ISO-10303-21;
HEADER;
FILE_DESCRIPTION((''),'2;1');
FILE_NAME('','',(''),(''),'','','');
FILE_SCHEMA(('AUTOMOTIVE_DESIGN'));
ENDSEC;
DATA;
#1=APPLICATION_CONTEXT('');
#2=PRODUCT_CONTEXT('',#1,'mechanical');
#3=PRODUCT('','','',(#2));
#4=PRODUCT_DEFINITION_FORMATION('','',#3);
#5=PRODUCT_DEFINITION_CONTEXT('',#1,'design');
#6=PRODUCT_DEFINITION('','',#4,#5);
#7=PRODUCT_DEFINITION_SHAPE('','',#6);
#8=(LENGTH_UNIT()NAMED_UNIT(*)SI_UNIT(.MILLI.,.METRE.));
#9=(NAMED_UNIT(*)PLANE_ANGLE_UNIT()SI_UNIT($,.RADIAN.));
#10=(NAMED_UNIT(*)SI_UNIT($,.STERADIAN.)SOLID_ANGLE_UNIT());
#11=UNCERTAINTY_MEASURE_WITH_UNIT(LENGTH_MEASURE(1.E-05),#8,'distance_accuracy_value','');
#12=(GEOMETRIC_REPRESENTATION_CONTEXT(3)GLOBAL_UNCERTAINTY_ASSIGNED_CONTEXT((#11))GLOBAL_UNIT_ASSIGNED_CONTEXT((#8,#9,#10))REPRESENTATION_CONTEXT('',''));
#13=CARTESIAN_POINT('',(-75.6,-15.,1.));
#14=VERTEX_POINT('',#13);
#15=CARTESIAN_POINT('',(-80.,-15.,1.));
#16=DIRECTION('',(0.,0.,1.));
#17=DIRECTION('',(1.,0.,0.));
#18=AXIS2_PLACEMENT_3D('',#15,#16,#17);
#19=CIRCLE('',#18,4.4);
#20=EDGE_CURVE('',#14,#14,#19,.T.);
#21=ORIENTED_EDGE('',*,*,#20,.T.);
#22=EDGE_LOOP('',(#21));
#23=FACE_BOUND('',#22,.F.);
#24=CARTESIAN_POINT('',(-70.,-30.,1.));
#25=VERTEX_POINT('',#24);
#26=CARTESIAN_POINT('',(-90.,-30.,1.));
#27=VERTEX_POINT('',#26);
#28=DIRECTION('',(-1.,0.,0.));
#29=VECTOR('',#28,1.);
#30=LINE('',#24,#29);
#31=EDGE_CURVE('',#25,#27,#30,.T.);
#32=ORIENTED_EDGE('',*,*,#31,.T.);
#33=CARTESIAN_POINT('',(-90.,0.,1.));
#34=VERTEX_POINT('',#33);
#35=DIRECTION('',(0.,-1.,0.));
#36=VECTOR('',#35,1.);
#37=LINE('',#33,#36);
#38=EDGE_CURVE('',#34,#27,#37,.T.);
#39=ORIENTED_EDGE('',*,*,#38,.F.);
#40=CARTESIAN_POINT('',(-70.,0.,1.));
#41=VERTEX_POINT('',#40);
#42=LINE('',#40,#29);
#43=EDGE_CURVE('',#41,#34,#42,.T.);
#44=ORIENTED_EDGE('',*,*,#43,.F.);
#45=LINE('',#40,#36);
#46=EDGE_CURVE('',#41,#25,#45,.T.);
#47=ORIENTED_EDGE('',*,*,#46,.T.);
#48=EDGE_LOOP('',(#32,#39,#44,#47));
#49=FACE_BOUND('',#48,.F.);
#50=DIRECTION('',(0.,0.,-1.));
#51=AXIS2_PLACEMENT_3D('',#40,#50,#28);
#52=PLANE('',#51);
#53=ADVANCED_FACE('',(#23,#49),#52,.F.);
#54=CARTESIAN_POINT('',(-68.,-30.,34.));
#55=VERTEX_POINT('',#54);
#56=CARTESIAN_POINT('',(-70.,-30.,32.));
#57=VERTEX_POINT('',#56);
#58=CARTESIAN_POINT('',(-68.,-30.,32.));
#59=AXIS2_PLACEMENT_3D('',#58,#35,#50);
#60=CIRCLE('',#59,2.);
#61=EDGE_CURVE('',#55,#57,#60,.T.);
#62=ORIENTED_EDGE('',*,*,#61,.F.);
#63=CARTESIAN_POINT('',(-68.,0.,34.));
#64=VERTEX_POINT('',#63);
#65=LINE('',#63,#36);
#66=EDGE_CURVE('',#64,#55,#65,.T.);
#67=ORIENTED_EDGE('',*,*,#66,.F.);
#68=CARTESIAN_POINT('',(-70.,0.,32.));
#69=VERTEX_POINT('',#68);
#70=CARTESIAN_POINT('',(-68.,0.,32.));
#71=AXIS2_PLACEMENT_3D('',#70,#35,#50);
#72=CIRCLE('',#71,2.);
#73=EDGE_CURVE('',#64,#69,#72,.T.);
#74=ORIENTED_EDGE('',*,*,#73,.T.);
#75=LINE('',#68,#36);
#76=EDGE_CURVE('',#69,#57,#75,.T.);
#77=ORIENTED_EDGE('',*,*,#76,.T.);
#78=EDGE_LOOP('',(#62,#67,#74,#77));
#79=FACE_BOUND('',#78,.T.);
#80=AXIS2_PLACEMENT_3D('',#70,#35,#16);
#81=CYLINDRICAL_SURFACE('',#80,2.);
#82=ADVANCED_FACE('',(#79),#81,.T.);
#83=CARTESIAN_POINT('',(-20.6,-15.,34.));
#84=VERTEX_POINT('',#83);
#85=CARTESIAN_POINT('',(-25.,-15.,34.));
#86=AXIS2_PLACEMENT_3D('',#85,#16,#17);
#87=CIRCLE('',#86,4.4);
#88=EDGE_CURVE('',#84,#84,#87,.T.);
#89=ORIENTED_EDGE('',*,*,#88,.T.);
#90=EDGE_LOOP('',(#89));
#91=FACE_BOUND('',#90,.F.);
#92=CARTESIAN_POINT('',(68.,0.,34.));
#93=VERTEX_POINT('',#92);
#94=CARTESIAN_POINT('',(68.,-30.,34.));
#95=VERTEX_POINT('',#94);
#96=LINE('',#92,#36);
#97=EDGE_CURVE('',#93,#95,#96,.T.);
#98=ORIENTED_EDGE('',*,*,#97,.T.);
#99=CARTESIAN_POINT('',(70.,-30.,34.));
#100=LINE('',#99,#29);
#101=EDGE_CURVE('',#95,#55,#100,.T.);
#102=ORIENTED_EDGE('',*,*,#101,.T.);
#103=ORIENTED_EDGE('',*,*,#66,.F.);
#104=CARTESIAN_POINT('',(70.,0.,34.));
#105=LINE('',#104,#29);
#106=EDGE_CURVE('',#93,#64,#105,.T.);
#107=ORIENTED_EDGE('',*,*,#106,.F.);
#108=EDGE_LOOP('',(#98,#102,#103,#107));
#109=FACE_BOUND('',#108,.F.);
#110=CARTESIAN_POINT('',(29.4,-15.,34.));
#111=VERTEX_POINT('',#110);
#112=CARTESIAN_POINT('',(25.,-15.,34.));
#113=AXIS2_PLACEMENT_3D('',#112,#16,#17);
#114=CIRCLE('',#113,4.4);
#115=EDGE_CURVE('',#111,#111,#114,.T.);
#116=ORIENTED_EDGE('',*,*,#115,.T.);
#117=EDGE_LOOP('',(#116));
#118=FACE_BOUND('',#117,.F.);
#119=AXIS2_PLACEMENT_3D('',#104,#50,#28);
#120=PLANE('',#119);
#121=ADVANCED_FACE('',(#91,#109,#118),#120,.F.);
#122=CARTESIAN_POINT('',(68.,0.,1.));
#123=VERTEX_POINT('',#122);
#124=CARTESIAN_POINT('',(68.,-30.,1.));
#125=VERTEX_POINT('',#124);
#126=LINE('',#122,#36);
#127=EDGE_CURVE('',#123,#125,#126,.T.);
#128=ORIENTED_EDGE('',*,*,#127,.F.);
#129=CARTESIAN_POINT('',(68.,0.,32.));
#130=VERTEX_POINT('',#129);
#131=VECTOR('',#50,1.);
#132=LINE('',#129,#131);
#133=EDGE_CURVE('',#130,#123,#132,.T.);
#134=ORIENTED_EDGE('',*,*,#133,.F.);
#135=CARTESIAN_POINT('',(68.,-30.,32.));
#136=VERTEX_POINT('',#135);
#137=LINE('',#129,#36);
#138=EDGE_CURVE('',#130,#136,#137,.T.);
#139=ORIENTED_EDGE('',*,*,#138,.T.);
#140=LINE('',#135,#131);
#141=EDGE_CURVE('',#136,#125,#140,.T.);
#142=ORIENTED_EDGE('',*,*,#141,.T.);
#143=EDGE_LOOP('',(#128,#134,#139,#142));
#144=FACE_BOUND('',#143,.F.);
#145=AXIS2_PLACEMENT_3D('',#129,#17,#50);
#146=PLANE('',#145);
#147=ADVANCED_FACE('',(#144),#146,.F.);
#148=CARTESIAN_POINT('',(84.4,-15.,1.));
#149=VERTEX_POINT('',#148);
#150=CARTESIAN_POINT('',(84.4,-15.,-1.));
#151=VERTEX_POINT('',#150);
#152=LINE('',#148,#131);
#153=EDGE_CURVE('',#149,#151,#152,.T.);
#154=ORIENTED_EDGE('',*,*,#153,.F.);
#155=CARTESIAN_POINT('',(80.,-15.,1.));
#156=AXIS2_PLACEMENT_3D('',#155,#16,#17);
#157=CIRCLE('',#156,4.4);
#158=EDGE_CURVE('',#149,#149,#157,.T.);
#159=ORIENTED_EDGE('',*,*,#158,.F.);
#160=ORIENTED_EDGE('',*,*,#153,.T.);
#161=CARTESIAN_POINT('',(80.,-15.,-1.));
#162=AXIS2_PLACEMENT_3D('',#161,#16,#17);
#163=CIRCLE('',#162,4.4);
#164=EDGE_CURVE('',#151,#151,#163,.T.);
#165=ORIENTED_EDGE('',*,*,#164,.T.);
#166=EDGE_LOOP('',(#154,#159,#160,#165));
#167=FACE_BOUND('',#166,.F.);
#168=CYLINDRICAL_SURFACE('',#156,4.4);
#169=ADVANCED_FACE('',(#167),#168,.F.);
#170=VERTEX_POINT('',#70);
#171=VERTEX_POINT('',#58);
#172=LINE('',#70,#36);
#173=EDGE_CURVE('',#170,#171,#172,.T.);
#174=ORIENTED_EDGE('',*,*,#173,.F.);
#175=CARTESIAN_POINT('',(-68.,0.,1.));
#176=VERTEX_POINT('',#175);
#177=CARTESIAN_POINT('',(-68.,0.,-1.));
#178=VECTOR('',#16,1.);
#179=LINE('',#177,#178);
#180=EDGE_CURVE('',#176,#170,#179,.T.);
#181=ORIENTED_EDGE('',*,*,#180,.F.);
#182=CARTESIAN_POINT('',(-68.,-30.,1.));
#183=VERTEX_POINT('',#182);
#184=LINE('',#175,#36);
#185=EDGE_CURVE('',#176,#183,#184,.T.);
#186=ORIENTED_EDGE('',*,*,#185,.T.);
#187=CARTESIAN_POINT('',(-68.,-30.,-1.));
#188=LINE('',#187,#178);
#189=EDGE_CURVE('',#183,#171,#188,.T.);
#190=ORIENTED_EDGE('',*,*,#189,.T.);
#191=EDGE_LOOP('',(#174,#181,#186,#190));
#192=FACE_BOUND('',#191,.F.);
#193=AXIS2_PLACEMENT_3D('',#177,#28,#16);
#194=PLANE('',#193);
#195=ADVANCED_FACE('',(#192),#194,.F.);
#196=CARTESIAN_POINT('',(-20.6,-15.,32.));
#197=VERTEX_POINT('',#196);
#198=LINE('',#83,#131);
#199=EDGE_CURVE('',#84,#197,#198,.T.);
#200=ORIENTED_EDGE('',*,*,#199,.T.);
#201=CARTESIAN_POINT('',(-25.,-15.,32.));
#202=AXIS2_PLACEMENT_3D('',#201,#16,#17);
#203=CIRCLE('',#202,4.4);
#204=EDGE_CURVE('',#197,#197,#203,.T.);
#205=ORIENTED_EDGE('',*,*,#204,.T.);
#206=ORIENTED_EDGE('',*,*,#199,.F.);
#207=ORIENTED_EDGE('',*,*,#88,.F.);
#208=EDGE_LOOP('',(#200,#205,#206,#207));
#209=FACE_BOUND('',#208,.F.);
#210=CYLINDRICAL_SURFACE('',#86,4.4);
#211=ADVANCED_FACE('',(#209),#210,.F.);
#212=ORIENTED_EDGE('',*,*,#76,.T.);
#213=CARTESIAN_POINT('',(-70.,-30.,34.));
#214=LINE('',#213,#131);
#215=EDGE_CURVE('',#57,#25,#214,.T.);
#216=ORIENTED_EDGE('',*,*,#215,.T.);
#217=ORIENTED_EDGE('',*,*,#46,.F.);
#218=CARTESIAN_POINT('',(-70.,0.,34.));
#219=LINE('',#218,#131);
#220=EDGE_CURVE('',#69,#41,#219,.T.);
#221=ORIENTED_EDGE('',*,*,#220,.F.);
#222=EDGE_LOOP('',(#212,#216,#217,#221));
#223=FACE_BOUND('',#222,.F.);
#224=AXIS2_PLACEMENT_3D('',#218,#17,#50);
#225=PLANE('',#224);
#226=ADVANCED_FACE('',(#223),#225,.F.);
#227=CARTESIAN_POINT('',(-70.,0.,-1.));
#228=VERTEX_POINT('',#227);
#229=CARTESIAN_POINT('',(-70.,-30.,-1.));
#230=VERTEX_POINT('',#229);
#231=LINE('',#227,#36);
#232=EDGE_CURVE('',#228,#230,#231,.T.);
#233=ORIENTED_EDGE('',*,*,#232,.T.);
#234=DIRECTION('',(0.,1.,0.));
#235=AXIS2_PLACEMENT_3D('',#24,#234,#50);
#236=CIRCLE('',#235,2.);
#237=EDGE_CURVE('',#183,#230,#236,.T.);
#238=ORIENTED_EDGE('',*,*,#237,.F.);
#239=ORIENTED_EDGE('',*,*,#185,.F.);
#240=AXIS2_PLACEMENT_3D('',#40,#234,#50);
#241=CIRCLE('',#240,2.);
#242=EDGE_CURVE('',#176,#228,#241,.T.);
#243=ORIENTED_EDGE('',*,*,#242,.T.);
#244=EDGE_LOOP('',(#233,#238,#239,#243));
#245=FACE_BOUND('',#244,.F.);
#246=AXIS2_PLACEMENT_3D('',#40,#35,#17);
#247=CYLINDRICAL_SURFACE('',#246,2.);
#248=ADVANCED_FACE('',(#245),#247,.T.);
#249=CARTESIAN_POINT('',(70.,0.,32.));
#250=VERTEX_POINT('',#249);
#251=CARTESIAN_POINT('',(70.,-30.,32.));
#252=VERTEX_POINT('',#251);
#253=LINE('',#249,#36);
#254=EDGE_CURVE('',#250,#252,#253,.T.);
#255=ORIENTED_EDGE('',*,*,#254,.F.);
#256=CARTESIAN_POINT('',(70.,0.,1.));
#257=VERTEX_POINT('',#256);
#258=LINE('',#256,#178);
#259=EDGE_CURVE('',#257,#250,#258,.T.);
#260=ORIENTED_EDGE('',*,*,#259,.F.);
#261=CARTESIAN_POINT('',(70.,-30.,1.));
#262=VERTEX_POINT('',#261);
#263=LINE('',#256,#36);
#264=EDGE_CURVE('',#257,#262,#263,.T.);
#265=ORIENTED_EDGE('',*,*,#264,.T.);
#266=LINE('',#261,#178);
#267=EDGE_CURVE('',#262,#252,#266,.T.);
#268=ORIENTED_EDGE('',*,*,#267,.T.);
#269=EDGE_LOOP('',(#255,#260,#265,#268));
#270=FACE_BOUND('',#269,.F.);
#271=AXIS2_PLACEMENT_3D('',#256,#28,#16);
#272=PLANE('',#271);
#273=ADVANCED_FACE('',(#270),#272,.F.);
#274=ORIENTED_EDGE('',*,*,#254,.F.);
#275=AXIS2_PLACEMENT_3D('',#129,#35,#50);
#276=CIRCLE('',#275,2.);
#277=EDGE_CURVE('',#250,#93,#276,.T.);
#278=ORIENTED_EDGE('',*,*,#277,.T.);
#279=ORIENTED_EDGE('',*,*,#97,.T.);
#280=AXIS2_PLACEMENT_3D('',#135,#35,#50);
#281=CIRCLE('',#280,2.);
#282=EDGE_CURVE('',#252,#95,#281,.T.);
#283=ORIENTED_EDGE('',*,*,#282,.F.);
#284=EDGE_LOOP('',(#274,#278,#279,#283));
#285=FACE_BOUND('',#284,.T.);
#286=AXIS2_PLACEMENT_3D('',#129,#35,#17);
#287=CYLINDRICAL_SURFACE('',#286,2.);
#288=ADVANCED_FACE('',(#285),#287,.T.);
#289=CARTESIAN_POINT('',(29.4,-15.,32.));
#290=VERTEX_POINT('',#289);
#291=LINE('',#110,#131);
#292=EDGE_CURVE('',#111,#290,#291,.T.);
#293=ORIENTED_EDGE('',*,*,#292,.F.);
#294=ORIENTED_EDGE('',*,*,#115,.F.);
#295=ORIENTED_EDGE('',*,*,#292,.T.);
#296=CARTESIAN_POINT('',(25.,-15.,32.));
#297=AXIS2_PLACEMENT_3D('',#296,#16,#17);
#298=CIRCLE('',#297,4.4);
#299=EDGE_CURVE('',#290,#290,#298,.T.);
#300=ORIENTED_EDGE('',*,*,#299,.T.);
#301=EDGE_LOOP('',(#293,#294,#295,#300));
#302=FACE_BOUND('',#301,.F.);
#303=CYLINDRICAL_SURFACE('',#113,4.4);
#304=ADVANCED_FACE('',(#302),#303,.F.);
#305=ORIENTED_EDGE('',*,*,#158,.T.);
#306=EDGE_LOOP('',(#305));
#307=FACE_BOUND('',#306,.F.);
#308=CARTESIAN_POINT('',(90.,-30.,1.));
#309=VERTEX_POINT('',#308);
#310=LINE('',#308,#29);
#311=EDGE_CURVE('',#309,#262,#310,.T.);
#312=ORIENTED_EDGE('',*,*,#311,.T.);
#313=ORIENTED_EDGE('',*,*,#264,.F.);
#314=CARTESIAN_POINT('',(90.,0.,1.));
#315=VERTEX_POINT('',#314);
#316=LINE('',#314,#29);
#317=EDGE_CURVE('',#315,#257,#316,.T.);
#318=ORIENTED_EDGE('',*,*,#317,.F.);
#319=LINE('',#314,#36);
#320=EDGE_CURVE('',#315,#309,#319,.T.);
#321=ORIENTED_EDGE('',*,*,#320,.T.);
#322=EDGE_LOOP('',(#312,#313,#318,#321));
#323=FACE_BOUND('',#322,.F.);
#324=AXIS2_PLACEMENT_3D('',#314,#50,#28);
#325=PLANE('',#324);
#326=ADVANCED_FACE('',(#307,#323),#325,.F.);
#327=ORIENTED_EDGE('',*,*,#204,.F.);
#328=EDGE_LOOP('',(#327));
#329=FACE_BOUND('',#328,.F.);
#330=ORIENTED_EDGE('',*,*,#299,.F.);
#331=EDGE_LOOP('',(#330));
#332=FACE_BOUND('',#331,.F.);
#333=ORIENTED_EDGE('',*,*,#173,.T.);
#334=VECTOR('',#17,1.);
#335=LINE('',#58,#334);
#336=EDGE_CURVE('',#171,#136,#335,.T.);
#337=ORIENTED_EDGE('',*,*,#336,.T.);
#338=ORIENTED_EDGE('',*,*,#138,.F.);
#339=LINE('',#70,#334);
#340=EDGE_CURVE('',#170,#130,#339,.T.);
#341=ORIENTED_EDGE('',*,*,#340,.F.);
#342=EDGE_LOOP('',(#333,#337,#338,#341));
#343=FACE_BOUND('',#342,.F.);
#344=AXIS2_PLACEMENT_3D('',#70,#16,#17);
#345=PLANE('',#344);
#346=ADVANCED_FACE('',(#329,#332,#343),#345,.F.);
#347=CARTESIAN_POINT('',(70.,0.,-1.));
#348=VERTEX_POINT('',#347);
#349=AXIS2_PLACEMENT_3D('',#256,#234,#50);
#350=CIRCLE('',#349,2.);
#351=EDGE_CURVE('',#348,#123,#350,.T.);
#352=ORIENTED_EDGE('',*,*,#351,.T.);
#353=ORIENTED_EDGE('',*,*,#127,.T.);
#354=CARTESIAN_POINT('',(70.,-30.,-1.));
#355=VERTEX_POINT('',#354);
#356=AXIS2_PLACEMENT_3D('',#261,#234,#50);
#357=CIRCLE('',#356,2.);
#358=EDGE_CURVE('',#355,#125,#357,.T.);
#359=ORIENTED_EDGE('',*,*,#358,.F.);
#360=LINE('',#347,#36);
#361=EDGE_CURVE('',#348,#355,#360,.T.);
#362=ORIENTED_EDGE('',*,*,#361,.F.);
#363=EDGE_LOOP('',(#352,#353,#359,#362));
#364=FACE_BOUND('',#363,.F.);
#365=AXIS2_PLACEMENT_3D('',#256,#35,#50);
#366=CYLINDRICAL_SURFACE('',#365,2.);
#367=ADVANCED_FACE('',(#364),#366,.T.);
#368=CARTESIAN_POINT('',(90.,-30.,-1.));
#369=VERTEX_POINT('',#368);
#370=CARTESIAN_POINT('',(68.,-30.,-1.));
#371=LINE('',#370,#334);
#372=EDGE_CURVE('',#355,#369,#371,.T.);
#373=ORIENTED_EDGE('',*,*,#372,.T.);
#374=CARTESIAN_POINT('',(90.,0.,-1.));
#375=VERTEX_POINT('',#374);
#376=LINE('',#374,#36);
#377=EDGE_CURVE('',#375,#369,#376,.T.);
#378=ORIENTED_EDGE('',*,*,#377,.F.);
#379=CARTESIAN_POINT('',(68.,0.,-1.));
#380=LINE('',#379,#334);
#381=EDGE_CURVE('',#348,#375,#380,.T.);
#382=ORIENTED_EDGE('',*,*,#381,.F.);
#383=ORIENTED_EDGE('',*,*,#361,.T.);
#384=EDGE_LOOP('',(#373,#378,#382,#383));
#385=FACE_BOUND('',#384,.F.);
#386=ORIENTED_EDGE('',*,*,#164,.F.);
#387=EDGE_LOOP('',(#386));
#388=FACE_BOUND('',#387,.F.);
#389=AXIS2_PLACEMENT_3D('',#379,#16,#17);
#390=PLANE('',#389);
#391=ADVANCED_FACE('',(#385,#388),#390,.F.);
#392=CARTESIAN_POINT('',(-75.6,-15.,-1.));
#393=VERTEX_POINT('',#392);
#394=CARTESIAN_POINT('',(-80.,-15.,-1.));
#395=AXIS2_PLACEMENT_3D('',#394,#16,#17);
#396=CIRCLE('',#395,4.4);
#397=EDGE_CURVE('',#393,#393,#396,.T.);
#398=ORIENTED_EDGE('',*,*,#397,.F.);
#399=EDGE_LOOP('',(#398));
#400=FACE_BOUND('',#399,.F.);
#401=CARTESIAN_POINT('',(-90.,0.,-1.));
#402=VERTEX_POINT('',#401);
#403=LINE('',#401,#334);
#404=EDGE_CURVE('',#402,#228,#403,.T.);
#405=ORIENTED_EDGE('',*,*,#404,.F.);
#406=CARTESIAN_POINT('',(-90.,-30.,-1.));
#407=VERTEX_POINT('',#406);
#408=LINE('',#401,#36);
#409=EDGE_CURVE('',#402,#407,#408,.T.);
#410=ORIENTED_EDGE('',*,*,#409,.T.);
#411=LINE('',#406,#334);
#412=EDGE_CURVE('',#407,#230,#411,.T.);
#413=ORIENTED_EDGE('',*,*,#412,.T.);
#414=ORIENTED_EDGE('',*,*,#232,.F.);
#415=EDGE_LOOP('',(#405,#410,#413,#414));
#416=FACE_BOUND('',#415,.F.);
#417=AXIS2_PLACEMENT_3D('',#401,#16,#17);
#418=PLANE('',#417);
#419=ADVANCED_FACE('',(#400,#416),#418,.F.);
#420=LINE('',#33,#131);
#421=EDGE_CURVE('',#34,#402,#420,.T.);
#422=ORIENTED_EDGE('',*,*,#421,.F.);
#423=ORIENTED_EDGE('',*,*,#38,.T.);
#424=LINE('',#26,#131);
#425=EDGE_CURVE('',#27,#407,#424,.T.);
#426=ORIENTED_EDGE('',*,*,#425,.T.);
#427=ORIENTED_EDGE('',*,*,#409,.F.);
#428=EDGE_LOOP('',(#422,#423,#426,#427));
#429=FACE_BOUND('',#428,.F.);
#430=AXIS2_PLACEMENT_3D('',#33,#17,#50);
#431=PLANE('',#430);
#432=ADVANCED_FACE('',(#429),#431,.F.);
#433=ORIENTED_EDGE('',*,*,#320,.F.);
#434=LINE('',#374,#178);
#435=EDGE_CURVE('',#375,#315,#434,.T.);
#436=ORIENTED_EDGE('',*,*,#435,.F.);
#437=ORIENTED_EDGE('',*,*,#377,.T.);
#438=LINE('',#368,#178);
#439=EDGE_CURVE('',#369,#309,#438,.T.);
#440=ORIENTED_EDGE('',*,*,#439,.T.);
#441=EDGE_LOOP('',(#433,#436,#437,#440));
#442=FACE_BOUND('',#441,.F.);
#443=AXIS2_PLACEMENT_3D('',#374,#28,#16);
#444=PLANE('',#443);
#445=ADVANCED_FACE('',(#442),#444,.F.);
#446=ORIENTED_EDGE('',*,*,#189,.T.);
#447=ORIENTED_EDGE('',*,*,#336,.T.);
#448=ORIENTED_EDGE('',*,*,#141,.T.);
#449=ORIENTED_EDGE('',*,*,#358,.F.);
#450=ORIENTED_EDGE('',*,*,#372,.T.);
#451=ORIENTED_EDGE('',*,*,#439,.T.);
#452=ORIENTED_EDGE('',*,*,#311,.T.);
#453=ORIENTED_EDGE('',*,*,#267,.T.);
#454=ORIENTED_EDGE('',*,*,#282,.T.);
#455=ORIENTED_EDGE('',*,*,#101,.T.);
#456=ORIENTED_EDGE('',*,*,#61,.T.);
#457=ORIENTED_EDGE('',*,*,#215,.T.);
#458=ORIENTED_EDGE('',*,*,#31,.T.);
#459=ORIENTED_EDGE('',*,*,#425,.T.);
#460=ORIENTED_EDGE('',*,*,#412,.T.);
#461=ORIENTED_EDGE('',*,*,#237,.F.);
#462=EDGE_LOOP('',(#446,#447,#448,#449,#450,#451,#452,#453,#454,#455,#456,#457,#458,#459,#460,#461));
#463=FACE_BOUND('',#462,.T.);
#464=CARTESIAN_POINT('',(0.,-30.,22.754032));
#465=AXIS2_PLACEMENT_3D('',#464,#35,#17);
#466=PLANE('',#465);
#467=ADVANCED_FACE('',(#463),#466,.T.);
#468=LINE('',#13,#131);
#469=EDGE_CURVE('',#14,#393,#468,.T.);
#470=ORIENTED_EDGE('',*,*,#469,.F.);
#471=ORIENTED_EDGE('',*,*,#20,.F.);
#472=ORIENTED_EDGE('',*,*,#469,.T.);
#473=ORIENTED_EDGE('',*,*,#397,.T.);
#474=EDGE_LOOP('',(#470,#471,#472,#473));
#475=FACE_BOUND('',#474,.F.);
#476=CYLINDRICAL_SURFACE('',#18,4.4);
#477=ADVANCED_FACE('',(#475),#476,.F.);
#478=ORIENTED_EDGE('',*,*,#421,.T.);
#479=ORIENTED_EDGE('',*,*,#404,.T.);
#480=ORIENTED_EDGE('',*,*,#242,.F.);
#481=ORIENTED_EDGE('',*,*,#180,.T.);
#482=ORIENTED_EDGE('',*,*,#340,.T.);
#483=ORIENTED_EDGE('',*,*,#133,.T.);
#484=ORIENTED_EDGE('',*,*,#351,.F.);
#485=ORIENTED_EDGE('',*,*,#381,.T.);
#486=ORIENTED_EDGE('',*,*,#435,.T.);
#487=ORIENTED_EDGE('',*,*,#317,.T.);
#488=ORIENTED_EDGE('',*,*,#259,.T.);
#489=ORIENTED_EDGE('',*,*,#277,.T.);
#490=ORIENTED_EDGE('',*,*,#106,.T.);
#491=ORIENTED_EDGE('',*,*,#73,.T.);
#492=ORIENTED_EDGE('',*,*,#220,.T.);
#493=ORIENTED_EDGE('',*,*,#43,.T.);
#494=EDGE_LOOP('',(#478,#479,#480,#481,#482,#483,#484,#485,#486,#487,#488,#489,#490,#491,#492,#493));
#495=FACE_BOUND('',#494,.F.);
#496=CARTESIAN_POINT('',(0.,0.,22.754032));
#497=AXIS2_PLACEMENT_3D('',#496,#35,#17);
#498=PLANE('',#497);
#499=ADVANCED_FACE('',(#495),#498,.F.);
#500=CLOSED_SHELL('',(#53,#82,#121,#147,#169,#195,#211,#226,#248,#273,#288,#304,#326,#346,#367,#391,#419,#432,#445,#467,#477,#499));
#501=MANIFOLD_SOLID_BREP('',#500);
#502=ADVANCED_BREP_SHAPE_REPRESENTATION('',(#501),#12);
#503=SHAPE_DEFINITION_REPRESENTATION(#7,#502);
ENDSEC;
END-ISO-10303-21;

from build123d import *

# Parameters (mm, degrees)
F1_DEPTH = 30
F2_R     = 4.4
F3_R     = 4.4
F4_DEPTH = 25
F5_R     = 2
F6_R     = 2


# Not quite as in the source:
# - a feature names something its author has since deleted; it is built from what else it names


with BuildPart() as f1:
    # F0 (on Front) → F1 (new body)
    with BuildSketch(Plane.XZ):
        Polygon((90, -1), (90, 1), (70, 1), (70, 34), (-70, 34), (-70, 1), (-90, 1), (-90, -1), (-68, -1), (-68, 32), (68, 32), (68, -1), align=None)
    extrude(amount=F1_DEPTH)

    # F2 (on face) + F3 (on face) → F4 (cut)
    with BuildSketch(Plane.XY.offset(1)):
        with Locations((-80, -15)):
            Circle(F2_R)
        with Locations((80, -15)):
            Circle(F2_R)
    with BuildSketch(Plane.XY.offset(34)):
        with Locations((-25, -15)):
            Circle(F3_R)
        with Locations((25, -15)):
            Circle(F3_R)
    extrude(amount=-F4_DEPTH, mode=Mode.SUBTRACT)

    # F5
    f5_edges = [f1.edges().sort_by_distance(p)[0] for p in [
        (-70, -15, 34),
        (70, -15, 34),
    ]]
    fillet(f5_edges, radius=F5_R)

    # F6
    f6_edges = [f1.edges().sort_by_distance(p)[0] for p in [
        (68, -15, -1),
        (-68, -15, -1),
    ]]
    fillet(f6_edges, radius=F6_R)


solid = f1.part
